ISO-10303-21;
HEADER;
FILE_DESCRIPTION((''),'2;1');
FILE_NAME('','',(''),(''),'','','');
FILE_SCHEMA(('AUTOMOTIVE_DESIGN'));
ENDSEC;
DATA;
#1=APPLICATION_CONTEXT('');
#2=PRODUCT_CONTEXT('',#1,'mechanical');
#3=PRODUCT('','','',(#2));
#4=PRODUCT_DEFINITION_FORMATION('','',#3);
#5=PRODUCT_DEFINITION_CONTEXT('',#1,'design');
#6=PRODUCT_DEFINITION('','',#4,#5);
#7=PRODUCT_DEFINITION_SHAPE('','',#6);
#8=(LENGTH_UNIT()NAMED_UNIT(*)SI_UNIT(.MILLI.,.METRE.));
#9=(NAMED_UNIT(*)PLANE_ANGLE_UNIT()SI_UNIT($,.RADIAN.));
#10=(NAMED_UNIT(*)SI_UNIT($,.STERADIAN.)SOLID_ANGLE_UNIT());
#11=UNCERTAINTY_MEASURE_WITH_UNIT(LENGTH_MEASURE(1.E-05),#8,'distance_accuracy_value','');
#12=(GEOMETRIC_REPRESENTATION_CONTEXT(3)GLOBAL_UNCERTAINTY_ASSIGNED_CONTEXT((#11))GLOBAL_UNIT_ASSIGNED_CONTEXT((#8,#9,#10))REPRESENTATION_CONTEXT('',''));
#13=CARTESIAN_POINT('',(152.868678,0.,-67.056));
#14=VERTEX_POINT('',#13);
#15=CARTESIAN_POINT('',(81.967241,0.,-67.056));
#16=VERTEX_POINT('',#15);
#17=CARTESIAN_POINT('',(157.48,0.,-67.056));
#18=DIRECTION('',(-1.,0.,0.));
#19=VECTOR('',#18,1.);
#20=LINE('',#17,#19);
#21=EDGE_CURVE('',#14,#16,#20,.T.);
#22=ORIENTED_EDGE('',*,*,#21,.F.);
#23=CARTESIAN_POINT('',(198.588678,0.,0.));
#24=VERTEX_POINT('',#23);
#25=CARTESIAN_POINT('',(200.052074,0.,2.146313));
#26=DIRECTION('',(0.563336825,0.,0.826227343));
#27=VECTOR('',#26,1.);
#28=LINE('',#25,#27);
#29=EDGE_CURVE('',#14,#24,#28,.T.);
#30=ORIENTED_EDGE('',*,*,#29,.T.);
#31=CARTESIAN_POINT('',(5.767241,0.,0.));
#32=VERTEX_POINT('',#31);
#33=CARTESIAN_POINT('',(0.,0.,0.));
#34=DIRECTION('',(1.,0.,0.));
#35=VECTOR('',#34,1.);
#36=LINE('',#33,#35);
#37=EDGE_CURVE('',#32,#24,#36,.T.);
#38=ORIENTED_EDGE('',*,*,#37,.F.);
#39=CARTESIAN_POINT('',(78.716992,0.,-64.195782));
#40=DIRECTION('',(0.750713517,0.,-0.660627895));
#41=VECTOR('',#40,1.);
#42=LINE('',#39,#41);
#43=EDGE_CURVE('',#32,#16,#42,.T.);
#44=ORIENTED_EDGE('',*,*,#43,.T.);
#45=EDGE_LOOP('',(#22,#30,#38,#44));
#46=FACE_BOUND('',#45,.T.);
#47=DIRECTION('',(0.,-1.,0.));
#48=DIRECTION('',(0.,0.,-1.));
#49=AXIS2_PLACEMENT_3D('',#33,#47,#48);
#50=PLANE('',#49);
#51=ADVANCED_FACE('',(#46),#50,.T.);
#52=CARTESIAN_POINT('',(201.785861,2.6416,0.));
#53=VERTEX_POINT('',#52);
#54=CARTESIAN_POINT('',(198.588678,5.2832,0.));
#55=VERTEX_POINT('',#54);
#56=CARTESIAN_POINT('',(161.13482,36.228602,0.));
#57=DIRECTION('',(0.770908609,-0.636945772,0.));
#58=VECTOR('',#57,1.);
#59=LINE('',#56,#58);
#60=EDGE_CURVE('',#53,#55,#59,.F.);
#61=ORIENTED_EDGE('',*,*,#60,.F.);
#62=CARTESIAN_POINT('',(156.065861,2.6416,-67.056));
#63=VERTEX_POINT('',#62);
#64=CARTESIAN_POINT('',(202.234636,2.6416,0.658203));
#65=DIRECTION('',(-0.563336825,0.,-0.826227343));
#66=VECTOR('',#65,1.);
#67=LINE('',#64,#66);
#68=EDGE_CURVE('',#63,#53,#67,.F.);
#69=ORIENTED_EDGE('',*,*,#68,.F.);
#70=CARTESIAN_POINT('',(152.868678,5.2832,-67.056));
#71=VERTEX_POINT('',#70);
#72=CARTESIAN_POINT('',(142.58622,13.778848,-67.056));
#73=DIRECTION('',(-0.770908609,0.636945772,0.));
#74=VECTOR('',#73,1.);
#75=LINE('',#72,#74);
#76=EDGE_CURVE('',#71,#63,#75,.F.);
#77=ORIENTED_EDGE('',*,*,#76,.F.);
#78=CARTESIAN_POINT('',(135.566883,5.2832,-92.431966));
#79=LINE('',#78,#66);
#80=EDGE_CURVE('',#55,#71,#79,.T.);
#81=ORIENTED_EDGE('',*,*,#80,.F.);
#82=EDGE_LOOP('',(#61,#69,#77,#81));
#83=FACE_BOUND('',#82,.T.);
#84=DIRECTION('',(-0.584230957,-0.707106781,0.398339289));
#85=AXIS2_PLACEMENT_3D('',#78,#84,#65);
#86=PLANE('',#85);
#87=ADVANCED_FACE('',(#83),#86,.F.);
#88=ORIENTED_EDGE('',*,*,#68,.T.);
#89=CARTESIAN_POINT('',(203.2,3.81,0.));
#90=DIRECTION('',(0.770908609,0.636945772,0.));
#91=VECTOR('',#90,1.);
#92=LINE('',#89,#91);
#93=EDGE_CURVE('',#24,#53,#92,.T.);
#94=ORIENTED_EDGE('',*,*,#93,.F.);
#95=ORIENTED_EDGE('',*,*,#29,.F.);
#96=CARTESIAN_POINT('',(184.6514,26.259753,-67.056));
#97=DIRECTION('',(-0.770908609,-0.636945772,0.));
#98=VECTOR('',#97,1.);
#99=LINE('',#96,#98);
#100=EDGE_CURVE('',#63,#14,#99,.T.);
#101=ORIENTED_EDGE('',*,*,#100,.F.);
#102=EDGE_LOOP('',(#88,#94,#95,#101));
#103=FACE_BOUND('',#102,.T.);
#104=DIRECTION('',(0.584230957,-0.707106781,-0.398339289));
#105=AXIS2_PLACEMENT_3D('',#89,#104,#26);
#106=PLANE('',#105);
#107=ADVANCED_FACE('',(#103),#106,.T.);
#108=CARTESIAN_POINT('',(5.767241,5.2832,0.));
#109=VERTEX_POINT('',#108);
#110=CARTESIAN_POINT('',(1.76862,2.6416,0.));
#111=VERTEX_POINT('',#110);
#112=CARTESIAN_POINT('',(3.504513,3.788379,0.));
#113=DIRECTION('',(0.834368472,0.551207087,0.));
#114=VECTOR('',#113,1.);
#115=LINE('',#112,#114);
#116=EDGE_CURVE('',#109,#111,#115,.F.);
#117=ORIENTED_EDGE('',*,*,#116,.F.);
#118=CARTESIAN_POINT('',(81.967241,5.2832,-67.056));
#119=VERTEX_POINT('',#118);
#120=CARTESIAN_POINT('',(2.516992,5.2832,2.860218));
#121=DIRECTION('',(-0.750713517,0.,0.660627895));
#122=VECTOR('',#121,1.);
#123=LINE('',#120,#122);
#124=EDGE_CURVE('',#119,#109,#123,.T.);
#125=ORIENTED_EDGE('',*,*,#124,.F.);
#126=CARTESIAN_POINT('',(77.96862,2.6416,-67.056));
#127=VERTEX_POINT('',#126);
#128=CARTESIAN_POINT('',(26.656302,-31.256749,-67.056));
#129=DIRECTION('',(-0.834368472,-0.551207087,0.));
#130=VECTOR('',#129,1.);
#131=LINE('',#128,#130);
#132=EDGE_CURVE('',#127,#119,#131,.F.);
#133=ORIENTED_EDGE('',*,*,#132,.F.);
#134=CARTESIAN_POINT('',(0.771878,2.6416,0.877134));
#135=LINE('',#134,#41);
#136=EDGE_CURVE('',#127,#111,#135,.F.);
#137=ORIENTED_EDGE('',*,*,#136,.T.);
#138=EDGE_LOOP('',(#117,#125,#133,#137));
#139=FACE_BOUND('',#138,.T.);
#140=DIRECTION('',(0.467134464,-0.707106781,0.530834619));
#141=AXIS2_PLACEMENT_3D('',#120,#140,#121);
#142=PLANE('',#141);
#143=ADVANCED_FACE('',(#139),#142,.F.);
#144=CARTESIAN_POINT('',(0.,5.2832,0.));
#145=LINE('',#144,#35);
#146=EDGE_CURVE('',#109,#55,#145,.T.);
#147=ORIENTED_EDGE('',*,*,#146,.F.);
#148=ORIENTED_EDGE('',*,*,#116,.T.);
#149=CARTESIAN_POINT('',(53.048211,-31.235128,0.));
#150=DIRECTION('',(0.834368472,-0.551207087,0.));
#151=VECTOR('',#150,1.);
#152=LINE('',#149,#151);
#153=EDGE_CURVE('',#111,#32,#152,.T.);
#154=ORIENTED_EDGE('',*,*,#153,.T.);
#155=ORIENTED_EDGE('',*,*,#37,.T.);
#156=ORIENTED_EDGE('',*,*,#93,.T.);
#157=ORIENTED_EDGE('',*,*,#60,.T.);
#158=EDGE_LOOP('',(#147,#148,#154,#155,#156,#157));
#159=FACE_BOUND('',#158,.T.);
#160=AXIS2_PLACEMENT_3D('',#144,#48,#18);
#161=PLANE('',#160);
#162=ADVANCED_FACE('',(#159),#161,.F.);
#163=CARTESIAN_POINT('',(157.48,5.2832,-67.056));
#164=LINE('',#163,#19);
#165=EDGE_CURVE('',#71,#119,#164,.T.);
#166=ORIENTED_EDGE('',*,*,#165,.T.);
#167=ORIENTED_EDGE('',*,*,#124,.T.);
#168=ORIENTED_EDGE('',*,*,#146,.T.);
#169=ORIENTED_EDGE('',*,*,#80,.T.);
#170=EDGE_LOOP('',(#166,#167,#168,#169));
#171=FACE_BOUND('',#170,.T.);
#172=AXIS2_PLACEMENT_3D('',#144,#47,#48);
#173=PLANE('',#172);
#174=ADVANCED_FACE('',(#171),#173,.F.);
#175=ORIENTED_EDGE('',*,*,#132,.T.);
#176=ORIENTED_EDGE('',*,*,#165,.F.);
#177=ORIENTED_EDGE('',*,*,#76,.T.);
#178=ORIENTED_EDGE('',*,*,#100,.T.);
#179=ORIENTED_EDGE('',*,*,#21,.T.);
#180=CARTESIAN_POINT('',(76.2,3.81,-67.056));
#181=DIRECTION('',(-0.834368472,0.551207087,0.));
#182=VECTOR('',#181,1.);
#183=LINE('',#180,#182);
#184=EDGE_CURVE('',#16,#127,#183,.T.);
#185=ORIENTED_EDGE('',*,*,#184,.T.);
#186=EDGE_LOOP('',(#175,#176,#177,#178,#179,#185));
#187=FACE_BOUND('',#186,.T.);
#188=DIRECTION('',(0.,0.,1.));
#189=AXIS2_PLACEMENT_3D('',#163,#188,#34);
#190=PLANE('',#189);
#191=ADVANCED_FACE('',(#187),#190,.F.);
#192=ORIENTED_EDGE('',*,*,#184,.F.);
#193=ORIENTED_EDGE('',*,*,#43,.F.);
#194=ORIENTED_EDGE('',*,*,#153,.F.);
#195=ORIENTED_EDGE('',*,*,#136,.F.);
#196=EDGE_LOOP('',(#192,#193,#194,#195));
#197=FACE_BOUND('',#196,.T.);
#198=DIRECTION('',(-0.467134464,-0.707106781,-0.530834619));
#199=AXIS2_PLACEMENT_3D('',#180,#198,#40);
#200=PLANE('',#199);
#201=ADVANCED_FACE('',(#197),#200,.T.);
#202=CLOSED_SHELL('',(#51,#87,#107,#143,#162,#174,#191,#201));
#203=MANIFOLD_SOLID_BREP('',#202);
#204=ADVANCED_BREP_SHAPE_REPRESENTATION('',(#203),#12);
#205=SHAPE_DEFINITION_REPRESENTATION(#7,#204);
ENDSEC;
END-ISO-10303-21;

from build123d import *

# Parameters (mm, degrees)
BOSS_EXTRUDE1_DEPTH = 5.2832
CHAMFER1_SIZE       = 3.81
CHAMFER2_SIZE       = 3.81


with BuildPart() as part:
    # Sketch1 → Boss-Extrude1 (new body)
    with BuildSketch(Plane(origin=(0, 0, 0), x_dir=(1, 0, 0), z_dir=(0, 1, 0))):
        Polygon((0, 0), (203.2, 0), (157.48, 67.056), (76.2, 67.056), align=None)
    extrude(amount=BOSS_EXTRUDE1_DEPTH)

    # Chamfer1
    # the kernel refuses this chamfer: 3.81 mm, written as the material it takes off along each edge
    with BuildSketch(Plane(origin=(83.555575257, 5.2832, -73.528906226), x_dir=(-0.018164543083463394, -0.9996219169112968, -0.020641526231208396), z_dir=(-0.7507135169227552, 0, 0.6606278948920248))) as chamfer1_piece_1:
        Polygon((CHAMFER1_SIZE * 0.999621916911, CHAMFER1_SIZE * 0.0274958766106), (-CHAMFER1_SIZE * 0.0274958766106, CHAMFER1_SIZE * 0.999621916911), (0, 0), align=None)
    extrude(amount=121.099658478, mode=Mode.SUBTRACT)
    with BuildSketch(Plane(origin=(83.555575257, 0, -73.528906226), x_dir=(-0.018164543083463394, 0.9996219169112968, -0.020641526231208396), z_dir=(-0.7507135169227552, 0, 0.6606278948920248))) as chamfer1_piece_2:
        Polygon((CHAMFER1_SIZE * 0.999621916911, -CHAMFER1_SIZE * 0.0274958766106), (-CHAMFER1_SIZE * 0.0274958766106, -CHAMFER1_SIZE * 0.999621916911), (0, 0), align=None)
    extrude(amount=121.099658478, mode=Mode.SUBTRACT)

    # Chamfer2
    # the kernel refuses this chamfer: 3.81 mm, written as the material it takes off along each edge
    with BuildSketch(Plane(origin=(208.719637405, 0, 8.095468194), x_dir=(-0.8259149602218081, -0.027495876610586452, 0.5631238365148687), z_dir=(-0.5633368246415095, 0, -0.8262273428075478)), Plane(origin=(208.719637405, 5.2832, 8.095468194), x_dir=(0.022717845070130322, -0.9996219169112966, -0.015489439820543389), z_dir=(-0.5633368246415095, 0, -0.8262273428075478))) as chamfer2_piece_1:
        Polygon((CHAMFER2_SIZE * 0.999621916911, CHAMFER2_SIZE * 0.0274958766106), (-CHAMFER2_SIZE * 0.0274958766106, CHAMFER2_SIZE * 0.999621916911), (0, 0), align=None)
    extrude(amount=100.75548469, mode=Mode.SUBTRACT)


solid = part.part
